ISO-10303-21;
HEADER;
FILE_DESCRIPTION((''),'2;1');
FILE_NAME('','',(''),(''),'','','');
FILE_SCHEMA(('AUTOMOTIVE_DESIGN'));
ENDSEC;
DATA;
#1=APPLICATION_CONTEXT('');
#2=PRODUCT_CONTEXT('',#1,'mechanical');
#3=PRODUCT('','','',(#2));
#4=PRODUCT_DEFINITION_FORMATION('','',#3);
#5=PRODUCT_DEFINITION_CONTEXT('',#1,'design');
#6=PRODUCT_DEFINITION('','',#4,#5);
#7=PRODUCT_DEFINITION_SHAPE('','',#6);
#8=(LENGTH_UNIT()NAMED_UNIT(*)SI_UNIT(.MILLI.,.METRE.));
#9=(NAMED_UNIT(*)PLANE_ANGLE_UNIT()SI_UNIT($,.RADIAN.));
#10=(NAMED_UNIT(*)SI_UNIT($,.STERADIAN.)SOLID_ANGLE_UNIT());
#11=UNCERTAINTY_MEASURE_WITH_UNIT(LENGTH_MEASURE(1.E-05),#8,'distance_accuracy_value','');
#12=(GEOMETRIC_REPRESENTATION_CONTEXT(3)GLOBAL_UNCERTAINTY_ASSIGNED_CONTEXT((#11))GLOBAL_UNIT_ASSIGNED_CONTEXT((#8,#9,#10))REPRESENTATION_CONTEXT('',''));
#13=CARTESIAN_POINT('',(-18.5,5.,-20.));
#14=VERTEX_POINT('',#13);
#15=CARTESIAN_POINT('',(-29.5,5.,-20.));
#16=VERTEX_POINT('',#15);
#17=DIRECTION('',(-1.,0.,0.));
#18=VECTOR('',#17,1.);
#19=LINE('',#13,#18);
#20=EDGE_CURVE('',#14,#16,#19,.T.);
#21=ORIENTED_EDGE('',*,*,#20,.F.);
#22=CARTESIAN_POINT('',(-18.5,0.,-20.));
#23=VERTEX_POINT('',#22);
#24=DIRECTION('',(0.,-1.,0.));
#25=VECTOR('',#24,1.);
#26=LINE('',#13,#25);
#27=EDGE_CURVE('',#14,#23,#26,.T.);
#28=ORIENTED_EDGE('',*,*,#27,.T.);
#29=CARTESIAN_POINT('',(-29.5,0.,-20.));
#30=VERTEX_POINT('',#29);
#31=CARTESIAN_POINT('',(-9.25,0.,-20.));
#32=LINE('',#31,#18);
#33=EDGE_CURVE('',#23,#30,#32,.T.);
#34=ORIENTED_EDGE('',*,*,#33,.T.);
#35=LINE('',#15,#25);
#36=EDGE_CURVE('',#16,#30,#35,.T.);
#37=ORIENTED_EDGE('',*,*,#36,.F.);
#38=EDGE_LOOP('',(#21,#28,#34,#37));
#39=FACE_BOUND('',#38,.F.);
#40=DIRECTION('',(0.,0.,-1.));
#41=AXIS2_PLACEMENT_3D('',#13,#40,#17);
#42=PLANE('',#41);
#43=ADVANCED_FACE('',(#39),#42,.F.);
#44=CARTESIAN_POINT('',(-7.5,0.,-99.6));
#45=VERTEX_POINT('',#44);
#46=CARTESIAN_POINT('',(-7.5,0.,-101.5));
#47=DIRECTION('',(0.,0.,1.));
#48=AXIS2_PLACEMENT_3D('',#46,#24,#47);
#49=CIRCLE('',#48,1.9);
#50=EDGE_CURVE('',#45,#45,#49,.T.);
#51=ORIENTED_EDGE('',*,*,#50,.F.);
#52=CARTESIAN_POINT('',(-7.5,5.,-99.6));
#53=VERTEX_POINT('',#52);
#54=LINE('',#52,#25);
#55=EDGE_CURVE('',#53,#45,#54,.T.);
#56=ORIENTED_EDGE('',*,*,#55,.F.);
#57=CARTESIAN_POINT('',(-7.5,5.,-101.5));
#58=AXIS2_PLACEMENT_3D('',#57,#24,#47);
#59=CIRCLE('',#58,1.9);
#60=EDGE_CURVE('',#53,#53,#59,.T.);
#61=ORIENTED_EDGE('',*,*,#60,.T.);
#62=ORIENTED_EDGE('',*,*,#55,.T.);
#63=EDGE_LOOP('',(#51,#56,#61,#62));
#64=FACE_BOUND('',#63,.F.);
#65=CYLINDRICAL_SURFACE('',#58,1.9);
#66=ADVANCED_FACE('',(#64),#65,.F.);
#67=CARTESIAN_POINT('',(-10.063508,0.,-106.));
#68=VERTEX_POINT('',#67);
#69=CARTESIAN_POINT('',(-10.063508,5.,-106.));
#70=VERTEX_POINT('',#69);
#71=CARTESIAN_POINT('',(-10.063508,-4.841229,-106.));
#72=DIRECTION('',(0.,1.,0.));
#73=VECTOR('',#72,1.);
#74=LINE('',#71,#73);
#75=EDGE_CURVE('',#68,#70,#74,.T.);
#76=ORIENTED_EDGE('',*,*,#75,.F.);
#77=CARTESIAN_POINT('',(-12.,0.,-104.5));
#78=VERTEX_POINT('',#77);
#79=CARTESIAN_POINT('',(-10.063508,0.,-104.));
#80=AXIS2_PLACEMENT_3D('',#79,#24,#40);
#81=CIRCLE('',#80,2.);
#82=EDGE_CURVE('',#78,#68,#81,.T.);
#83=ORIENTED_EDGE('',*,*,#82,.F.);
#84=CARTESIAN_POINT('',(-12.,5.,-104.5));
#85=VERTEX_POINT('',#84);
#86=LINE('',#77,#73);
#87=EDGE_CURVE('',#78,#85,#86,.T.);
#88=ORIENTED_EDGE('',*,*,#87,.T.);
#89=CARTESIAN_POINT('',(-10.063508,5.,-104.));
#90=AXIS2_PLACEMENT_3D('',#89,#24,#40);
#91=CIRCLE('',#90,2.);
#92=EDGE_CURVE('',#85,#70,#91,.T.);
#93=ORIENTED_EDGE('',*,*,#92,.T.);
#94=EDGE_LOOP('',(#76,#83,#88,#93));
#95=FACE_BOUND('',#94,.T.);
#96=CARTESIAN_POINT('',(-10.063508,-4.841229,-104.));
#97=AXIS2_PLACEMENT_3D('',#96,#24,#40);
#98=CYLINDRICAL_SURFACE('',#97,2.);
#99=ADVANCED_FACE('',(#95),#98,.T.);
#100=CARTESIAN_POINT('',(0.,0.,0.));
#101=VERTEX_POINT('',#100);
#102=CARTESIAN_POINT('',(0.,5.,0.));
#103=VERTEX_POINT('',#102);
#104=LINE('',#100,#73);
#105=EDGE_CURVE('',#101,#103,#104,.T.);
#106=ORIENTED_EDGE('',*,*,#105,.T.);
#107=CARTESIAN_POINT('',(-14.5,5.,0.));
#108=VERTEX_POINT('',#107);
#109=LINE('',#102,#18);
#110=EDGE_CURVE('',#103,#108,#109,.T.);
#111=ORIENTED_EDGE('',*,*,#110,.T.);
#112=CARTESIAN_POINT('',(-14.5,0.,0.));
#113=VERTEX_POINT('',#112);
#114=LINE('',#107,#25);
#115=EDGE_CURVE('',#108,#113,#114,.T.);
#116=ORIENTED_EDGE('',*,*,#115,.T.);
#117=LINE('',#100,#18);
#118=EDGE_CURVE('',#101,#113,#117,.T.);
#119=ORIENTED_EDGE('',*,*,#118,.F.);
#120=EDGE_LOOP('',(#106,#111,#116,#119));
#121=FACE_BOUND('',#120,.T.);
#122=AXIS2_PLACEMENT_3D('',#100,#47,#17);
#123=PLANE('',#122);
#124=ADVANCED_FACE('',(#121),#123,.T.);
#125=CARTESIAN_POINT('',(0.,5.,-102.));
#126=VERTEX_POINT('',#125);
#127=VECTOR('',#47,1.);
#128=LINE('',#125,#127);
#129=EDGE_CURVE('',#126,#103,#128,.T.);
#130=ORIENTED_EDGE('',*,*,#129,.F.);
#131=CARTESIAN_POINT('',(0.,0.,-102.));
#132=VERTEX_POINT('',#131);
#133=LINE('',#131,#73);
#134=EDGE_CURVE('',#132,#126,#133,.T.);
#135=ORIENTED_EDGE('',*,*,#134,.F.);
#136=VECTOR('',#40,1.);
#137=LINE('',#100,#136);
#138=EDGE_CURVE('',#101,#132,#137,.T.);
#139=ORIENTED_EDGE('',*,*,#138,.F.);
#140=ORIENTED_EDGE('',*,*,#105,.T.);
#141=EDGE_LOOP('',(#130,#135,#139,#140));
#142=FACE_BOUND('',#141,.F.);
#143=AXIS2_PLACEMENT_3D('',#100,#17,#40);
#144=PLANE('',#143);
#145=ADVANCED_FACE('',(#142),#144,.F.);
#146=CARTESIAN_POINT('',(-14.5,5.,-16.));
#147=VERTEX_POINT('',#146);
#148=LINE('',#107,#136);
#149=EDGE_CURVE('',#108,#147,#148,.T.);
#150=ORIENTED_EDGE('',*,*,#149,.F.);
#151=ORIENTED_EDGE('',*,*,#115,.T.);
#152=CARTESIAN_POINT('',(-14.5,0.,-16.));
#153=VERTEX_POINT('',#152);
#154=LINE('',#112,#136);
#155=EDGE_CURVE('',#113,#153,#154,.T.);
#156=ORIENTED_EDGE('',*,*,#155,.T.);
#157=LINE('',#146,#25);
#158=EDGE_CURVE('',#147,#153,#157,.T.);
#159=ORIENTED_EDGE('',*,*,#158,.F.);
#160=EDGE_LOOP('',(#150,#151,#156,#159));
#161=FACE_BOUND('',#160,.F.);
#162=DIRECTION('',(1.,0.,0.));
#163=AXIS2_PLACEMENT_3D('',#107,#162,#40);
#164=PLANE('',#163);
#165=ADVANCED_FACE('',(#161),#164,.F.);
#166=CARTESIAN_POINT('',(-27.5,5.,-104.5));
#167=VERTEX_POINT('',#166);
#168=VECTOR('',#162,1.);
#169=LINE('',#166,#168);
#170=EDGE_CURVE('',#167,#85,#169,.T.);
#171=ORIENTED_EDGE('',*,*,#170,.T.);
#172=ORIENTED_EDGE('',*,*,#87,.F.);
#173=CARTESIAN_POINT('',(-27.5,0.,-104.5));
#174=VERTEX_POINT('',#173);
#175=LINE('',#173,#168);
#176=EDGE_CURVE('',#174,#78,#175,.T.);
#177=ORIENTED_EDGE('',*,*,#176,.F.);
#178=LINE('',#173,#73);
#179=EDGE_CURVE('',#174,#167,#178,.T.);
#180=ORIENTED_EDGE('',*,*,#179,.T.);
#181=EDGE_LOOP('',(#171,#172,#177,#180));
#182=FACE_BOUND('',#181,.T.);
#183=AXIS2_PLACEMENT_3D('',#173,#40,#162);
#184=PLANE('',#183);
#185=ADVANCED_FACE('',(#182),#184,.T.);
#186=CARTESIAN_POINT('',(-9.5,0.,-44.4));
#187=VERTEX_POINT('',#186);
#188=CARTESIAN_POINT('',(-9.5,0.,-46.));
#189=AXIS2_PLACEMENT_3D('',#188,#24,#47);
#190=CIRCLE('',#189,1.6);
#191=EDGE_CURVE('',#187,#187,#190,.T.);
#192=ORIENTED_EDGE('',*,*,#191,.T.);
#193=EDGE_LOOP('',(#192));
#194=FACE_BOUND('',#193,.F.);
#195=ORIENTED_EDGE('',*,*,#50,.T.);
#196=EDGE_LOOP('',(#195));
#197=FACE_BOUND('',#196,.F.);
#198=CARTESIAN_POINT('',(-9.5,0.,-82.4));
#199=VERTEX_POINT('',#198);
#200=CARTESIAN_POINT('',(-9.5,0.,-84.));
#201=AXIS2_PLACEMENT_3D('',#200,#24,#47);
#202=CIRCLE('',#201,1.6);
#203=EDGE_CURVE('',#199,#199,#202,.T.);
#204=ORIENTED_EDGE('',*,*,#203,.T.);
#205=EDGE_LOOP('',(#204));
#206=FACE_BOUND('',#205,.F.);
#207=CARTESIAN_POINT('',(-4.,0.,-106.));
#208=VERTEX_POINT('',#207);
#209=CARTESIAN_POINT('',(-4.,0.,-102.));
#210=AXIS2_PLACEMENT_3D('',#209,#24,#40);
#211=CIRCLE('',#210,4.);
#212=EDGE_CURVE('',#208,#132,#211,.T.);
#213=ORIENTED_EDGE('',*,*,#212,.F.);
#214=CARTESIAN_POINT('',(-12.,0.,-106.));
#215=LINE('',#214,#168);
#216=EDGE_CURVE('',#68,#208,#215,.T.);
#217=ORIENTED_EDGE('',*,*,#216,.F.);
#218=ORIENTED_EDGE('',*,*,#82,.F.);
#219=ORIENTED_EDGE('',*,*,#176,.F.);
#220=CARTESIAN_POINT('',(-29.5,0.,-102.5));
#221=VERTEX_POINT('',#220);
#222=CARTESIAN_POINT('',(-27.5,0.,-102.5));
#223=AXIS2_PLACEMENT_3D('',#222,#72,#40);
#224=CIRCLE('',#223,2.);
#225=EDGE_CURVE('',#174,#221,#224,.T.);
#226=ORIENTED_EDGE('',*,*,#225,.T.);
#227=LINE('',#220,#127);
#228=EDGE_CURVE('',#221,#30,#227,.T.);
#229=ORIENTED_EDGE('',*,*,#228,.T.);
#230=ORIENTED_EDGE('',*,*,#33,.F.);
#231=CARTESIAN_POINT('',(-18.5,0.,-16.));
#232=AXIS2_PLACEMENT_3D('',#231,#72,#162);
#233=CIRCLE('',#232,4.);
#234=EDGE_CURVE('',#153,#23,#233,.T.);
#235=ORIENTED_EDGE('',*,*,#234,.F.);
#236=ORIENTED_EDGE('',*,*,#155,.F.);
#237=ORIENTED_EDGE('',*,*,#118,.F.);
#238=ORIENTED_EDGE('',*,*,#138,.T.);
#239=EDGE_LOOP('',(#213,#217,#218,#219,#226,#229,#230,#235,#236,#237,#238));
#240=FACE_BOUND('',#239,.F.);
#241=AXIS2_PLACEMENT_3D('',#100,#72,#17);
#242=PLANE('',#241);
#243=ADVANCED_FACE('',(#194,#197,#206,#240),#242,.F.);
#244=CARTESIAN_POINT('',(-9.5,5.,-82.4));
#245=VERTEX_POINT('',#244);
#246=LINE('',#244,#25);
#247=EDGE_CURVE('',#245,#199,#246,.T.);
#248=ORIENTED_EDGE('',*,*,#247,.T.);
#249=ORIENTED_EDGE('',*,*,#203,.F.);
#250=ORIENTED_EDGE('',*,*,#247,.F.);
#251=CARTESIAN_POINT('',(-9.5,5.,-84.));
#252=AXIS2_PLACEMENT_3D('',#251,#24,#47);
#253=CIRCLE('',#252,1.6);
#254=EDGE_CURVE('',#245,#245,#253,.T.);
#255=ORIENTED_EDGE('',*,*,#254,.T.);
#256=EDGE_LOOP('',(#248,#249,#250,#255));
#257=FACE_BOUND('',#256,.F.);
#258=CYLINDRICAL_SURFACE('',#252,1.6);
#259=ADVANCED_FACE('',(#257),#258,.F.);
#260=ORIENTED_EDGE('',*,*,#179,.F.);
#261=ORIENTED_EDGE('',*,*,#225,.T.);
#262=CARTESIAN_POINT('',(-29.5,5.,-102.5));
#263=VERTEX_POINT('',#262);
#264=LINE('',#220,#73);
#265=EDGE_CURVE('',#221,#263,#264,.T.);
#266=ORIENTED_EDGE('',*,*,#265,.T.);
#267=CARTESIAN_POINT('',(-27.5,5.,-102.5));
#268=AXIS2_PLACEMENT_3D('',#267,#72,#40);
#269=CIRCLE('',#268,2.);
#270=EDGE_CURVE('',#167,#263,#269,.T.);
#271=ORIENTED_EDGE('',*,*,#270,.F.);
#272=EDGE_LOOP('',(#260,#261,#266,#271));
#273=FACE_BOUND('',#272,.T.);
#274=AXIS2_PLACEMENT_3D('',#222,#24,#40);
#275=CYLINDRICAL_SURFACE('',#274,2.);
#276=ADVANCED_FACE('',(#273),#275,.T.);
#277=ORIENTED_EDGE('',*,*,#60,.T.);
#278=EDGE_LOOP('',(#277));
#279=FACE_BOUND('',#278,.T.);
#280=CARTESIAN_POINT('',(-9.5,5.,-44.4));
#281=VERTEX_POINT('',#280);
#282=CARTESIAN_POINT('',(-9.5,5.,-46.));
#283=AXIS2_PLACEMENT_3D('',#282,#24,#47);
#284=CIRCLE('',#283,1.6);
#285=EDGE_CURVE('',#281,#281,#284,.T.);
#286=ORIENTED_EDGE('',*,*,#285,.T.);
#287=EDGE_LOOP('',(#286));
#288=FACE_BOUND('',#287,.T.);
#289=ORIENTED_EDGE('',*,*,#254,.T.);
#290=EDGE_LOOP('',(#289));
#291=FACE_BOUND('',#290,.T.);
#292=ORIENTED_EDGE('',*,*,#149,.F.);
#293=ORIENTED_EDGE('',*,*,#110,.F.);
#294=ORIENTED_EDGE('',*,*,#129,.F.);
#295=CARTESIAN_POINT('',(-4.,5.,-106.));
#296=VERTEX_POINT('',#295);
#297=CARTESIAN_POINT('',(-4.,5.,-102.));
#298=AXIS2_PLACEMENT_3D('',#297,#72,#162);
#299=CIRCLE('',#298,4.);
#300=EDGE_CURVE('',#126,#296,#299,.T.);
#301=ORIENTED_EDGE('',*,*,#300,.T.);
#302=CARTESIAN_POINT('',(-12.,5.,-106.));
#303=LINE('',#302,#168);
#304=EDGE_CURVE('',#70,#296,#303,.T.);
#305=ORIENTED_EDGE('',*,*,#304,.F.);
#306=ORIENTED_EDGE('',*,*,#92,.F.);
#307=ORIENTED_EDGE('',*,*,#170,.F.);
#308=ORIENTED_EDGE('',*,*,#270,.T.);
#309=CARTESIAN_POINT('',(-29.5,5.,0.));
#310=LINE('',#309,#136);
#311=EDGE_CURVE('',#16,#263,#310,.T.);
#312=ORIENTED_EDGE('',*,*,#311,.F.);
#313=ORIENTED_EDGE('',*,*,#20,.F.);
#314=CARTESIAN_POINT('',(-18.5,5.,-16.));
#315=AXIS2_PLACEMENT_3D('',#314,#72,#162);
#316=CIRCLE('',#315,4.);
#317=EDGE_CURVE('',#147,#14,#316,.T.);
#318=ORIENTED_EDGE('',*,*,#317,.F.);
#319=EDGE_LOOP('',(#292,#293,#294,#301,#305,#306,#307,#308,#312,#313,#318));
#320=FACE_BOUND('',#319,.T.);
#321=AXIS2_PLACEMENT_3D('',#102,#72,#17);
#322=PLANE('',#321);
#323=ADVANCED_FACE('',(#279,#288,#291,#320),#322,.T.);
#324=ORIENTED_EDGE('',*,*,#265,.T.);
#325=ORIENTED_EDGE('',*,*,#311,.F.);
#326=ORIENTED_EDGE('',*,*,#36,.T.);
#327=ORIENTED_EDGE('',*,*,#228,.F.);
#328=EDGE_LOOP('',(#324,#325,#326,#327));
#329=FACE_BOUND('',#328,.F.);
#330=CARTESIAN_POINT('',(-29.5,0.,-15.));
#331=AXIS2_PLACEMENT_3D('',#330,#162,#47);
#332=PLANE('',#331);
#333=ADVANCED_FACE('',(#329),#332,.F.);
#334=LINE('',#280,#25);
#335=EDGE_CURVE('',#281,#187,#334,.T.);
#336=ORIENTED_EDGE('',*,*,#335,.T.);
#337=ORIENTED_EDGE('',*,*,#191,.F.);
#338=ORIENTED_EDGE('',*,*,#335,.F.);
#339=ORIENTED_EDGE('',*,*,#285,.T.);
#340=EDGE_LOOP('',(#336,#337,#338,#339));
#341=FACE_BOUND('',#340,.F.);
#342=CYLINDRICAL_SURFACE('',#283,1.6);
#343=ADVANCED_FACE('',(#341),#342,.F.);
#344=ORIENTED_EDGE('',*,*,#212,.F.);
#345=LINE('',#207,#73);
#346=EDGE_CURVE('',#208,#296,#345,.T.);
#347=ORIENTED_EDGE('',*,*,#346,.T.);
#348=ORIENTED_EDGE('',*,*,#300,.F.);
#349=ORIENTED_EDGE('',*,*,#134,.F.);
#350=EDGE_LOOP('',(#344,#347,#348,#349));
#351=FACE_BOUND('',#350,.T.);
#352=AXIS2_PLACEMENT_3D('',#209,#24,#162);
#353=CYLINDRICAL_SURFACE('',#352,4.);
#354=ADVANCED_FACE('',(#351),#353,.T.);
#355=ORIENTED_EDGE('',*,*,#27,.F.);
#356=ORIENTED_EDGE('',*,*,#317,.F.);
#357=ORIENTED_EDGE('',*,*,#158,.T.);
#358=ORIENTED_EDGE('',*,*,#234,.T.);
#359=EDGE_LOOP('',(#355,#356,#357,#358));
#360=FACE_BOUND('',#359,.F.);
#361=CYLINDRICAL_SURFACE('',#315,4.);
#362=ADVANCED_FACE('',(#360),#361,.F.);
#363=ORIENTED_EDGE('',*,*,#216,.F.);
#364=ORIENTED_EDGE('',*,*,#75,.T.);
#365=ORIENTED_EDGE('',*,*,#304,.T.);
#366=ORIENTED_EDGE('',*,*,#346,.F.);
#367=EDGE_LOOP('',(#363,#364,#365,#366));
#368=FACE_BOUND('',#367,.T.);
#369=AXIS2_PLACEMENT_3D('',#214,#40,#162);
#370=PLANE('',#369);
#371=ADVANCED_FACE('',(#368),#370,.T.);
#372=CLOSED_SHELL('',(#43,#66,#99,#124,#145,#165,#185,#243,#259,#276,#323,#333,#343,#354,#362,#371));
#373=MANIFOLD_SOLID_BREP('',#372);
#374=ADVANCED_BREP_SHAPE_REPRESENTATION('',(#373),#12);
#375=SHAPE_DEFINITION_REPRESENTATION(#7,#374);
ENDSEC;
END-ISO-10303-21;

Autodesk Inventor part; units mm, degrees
ref_plane "YZ Plane" through (0, 0, 0) normal (1, 0, 0) x (0, 1, 0)
ref_plane "XZ Plane" through (0, 0, 0) normal (0, 1, 0) x (-1, 0, 0)
ref_plane "XY Plane" through (0, 0, 0) normal (0, 0, 1) x (1, 0, 0)
sketch "Sketch1" plane through (0, 0, 0) normal (0, 1, 0) x (-1, 0, 0)
  line L0 (0, 0) -> (29.5, 0)
  line L1 (29.5, -15) -> (29.5, -102.5)
  line L2 (0.8775, -104.5) -> (0, -104.5)
  line L3 (0, -102.5) -> (0, -15)
  line L4 (0, -93.5) -> (0, -102)
  line L5 (0, -43.5) -> (0, -56.5)
  line L6 (29.5, 0) -> (0, 0)
  line L7 (0, 0) -> (0, -15)
  line L8 (29.5, -15) -> (29.5, 0)
  arc A0 (27.5, -104.5) -> (29.5, -102.5) centre (27.5, -102.5) ccw
  line L9 (27.5, -104.5) -> (12, -104.5)
  line L10 (27.5, -104.5) -> (12, -104.5)
  line L11 (0, -104.5) -> (0.8775, -104.5)
  line L12 (12, -104.5) -> (12, -106)
  line L13 (12, -106) -> (4, -106)
  line L14 (0, -102) -> (0, -104.5)
  arc A1 (0, -102) -> (4, -106) centre (4, -102) ccw
  point P0 (29.5, -104.5)
  point P1 (11, -104.5)
  point P2 (0, -102)
  point P3 (0, -106)
  dimension "d0" = 29.5
  dimension "d1" = 104.5
  dimension "d7" = 15
  dimension "d8" = 2
  dimension "d40" = 12
  dimension "d41" = 1.5
  dimension "d42" = 4
extrude "Extrusion1" add sketch "Sketch1" along normal blind 5 contours L0 L8 L1 A0 L9 L12 L13 A1 L3 L7
sketch "Sketch2" plane through (0, 5, 0) normal (0, 1, 0) x (1, 0, 0)
  line L0 (-9.5, -6.918) -> (-9.5, 116.4057) construction
  line L1 (0, 0) -> (0, 102) construction
  line L2 (-29.5, 102.5) -> (-29.5, 0) projected
  point P0 (-9.5, 84)
  point P1 (-9.5, 46)
  point P2 (-29.5, 16)
  point P3 (0, 16)
  point P4 (0, 102.5)
  point P5 (0, 104.5)
  dimension "d13" = 46
  dimension "d14" = 84
  dimension "d23" = 20
hole "Hole1" at (-9.5, 5, -84) at (-9.5, 5, -46) direction (0, -1, 0) diameter 3.2 end through all
sketch "Sketch3" plane through (0, 5, 0) normal (0, 1, 0) x (1, 0, 0)
  line L0 (-29.5, 0) -> (0, 0) projected
  line L1 (-29.5, 0) -> (-14.5, 0)
  line L2 (-14.5, 0) -> (-14.5, 16)
  line L3 (-18.5, 20) -> (-29.5, 20)
  line L4 (-29.5, 20) -> (-29.5, 0)
  arc A0 (-14.5, 16) -> (-18.5, 20) centre (-18.5, 16) ccw
  point P0 (-14.5, 20)
  dimension "d26" = 15
  dimension "d27" = 20
  dimension "d28" = 4
extrude "Extrusion2" cut sketch "Sketch3" against normal through all
sketch "Sketch4" plane through (0, 5, 0) normal (0, 1, 0) x (1, 0, 0)
  line L0 (0, 0) -> (0, 102) projected
  line L1 (-4, 106) -> (-12, 106) projected
  point P0 (-7.5, 101.5)
  dimension "d31" = 7.5
  dimension "d43" = 4.5
hole "Hole2" at (-7.5, 5, -101.5) direction (0, -1, 0) diameter 3.8 end through all
fillet "Fillet1" radius 2 1 edges at (-12, 2.5, -106)
properties part number "Upper slide"
